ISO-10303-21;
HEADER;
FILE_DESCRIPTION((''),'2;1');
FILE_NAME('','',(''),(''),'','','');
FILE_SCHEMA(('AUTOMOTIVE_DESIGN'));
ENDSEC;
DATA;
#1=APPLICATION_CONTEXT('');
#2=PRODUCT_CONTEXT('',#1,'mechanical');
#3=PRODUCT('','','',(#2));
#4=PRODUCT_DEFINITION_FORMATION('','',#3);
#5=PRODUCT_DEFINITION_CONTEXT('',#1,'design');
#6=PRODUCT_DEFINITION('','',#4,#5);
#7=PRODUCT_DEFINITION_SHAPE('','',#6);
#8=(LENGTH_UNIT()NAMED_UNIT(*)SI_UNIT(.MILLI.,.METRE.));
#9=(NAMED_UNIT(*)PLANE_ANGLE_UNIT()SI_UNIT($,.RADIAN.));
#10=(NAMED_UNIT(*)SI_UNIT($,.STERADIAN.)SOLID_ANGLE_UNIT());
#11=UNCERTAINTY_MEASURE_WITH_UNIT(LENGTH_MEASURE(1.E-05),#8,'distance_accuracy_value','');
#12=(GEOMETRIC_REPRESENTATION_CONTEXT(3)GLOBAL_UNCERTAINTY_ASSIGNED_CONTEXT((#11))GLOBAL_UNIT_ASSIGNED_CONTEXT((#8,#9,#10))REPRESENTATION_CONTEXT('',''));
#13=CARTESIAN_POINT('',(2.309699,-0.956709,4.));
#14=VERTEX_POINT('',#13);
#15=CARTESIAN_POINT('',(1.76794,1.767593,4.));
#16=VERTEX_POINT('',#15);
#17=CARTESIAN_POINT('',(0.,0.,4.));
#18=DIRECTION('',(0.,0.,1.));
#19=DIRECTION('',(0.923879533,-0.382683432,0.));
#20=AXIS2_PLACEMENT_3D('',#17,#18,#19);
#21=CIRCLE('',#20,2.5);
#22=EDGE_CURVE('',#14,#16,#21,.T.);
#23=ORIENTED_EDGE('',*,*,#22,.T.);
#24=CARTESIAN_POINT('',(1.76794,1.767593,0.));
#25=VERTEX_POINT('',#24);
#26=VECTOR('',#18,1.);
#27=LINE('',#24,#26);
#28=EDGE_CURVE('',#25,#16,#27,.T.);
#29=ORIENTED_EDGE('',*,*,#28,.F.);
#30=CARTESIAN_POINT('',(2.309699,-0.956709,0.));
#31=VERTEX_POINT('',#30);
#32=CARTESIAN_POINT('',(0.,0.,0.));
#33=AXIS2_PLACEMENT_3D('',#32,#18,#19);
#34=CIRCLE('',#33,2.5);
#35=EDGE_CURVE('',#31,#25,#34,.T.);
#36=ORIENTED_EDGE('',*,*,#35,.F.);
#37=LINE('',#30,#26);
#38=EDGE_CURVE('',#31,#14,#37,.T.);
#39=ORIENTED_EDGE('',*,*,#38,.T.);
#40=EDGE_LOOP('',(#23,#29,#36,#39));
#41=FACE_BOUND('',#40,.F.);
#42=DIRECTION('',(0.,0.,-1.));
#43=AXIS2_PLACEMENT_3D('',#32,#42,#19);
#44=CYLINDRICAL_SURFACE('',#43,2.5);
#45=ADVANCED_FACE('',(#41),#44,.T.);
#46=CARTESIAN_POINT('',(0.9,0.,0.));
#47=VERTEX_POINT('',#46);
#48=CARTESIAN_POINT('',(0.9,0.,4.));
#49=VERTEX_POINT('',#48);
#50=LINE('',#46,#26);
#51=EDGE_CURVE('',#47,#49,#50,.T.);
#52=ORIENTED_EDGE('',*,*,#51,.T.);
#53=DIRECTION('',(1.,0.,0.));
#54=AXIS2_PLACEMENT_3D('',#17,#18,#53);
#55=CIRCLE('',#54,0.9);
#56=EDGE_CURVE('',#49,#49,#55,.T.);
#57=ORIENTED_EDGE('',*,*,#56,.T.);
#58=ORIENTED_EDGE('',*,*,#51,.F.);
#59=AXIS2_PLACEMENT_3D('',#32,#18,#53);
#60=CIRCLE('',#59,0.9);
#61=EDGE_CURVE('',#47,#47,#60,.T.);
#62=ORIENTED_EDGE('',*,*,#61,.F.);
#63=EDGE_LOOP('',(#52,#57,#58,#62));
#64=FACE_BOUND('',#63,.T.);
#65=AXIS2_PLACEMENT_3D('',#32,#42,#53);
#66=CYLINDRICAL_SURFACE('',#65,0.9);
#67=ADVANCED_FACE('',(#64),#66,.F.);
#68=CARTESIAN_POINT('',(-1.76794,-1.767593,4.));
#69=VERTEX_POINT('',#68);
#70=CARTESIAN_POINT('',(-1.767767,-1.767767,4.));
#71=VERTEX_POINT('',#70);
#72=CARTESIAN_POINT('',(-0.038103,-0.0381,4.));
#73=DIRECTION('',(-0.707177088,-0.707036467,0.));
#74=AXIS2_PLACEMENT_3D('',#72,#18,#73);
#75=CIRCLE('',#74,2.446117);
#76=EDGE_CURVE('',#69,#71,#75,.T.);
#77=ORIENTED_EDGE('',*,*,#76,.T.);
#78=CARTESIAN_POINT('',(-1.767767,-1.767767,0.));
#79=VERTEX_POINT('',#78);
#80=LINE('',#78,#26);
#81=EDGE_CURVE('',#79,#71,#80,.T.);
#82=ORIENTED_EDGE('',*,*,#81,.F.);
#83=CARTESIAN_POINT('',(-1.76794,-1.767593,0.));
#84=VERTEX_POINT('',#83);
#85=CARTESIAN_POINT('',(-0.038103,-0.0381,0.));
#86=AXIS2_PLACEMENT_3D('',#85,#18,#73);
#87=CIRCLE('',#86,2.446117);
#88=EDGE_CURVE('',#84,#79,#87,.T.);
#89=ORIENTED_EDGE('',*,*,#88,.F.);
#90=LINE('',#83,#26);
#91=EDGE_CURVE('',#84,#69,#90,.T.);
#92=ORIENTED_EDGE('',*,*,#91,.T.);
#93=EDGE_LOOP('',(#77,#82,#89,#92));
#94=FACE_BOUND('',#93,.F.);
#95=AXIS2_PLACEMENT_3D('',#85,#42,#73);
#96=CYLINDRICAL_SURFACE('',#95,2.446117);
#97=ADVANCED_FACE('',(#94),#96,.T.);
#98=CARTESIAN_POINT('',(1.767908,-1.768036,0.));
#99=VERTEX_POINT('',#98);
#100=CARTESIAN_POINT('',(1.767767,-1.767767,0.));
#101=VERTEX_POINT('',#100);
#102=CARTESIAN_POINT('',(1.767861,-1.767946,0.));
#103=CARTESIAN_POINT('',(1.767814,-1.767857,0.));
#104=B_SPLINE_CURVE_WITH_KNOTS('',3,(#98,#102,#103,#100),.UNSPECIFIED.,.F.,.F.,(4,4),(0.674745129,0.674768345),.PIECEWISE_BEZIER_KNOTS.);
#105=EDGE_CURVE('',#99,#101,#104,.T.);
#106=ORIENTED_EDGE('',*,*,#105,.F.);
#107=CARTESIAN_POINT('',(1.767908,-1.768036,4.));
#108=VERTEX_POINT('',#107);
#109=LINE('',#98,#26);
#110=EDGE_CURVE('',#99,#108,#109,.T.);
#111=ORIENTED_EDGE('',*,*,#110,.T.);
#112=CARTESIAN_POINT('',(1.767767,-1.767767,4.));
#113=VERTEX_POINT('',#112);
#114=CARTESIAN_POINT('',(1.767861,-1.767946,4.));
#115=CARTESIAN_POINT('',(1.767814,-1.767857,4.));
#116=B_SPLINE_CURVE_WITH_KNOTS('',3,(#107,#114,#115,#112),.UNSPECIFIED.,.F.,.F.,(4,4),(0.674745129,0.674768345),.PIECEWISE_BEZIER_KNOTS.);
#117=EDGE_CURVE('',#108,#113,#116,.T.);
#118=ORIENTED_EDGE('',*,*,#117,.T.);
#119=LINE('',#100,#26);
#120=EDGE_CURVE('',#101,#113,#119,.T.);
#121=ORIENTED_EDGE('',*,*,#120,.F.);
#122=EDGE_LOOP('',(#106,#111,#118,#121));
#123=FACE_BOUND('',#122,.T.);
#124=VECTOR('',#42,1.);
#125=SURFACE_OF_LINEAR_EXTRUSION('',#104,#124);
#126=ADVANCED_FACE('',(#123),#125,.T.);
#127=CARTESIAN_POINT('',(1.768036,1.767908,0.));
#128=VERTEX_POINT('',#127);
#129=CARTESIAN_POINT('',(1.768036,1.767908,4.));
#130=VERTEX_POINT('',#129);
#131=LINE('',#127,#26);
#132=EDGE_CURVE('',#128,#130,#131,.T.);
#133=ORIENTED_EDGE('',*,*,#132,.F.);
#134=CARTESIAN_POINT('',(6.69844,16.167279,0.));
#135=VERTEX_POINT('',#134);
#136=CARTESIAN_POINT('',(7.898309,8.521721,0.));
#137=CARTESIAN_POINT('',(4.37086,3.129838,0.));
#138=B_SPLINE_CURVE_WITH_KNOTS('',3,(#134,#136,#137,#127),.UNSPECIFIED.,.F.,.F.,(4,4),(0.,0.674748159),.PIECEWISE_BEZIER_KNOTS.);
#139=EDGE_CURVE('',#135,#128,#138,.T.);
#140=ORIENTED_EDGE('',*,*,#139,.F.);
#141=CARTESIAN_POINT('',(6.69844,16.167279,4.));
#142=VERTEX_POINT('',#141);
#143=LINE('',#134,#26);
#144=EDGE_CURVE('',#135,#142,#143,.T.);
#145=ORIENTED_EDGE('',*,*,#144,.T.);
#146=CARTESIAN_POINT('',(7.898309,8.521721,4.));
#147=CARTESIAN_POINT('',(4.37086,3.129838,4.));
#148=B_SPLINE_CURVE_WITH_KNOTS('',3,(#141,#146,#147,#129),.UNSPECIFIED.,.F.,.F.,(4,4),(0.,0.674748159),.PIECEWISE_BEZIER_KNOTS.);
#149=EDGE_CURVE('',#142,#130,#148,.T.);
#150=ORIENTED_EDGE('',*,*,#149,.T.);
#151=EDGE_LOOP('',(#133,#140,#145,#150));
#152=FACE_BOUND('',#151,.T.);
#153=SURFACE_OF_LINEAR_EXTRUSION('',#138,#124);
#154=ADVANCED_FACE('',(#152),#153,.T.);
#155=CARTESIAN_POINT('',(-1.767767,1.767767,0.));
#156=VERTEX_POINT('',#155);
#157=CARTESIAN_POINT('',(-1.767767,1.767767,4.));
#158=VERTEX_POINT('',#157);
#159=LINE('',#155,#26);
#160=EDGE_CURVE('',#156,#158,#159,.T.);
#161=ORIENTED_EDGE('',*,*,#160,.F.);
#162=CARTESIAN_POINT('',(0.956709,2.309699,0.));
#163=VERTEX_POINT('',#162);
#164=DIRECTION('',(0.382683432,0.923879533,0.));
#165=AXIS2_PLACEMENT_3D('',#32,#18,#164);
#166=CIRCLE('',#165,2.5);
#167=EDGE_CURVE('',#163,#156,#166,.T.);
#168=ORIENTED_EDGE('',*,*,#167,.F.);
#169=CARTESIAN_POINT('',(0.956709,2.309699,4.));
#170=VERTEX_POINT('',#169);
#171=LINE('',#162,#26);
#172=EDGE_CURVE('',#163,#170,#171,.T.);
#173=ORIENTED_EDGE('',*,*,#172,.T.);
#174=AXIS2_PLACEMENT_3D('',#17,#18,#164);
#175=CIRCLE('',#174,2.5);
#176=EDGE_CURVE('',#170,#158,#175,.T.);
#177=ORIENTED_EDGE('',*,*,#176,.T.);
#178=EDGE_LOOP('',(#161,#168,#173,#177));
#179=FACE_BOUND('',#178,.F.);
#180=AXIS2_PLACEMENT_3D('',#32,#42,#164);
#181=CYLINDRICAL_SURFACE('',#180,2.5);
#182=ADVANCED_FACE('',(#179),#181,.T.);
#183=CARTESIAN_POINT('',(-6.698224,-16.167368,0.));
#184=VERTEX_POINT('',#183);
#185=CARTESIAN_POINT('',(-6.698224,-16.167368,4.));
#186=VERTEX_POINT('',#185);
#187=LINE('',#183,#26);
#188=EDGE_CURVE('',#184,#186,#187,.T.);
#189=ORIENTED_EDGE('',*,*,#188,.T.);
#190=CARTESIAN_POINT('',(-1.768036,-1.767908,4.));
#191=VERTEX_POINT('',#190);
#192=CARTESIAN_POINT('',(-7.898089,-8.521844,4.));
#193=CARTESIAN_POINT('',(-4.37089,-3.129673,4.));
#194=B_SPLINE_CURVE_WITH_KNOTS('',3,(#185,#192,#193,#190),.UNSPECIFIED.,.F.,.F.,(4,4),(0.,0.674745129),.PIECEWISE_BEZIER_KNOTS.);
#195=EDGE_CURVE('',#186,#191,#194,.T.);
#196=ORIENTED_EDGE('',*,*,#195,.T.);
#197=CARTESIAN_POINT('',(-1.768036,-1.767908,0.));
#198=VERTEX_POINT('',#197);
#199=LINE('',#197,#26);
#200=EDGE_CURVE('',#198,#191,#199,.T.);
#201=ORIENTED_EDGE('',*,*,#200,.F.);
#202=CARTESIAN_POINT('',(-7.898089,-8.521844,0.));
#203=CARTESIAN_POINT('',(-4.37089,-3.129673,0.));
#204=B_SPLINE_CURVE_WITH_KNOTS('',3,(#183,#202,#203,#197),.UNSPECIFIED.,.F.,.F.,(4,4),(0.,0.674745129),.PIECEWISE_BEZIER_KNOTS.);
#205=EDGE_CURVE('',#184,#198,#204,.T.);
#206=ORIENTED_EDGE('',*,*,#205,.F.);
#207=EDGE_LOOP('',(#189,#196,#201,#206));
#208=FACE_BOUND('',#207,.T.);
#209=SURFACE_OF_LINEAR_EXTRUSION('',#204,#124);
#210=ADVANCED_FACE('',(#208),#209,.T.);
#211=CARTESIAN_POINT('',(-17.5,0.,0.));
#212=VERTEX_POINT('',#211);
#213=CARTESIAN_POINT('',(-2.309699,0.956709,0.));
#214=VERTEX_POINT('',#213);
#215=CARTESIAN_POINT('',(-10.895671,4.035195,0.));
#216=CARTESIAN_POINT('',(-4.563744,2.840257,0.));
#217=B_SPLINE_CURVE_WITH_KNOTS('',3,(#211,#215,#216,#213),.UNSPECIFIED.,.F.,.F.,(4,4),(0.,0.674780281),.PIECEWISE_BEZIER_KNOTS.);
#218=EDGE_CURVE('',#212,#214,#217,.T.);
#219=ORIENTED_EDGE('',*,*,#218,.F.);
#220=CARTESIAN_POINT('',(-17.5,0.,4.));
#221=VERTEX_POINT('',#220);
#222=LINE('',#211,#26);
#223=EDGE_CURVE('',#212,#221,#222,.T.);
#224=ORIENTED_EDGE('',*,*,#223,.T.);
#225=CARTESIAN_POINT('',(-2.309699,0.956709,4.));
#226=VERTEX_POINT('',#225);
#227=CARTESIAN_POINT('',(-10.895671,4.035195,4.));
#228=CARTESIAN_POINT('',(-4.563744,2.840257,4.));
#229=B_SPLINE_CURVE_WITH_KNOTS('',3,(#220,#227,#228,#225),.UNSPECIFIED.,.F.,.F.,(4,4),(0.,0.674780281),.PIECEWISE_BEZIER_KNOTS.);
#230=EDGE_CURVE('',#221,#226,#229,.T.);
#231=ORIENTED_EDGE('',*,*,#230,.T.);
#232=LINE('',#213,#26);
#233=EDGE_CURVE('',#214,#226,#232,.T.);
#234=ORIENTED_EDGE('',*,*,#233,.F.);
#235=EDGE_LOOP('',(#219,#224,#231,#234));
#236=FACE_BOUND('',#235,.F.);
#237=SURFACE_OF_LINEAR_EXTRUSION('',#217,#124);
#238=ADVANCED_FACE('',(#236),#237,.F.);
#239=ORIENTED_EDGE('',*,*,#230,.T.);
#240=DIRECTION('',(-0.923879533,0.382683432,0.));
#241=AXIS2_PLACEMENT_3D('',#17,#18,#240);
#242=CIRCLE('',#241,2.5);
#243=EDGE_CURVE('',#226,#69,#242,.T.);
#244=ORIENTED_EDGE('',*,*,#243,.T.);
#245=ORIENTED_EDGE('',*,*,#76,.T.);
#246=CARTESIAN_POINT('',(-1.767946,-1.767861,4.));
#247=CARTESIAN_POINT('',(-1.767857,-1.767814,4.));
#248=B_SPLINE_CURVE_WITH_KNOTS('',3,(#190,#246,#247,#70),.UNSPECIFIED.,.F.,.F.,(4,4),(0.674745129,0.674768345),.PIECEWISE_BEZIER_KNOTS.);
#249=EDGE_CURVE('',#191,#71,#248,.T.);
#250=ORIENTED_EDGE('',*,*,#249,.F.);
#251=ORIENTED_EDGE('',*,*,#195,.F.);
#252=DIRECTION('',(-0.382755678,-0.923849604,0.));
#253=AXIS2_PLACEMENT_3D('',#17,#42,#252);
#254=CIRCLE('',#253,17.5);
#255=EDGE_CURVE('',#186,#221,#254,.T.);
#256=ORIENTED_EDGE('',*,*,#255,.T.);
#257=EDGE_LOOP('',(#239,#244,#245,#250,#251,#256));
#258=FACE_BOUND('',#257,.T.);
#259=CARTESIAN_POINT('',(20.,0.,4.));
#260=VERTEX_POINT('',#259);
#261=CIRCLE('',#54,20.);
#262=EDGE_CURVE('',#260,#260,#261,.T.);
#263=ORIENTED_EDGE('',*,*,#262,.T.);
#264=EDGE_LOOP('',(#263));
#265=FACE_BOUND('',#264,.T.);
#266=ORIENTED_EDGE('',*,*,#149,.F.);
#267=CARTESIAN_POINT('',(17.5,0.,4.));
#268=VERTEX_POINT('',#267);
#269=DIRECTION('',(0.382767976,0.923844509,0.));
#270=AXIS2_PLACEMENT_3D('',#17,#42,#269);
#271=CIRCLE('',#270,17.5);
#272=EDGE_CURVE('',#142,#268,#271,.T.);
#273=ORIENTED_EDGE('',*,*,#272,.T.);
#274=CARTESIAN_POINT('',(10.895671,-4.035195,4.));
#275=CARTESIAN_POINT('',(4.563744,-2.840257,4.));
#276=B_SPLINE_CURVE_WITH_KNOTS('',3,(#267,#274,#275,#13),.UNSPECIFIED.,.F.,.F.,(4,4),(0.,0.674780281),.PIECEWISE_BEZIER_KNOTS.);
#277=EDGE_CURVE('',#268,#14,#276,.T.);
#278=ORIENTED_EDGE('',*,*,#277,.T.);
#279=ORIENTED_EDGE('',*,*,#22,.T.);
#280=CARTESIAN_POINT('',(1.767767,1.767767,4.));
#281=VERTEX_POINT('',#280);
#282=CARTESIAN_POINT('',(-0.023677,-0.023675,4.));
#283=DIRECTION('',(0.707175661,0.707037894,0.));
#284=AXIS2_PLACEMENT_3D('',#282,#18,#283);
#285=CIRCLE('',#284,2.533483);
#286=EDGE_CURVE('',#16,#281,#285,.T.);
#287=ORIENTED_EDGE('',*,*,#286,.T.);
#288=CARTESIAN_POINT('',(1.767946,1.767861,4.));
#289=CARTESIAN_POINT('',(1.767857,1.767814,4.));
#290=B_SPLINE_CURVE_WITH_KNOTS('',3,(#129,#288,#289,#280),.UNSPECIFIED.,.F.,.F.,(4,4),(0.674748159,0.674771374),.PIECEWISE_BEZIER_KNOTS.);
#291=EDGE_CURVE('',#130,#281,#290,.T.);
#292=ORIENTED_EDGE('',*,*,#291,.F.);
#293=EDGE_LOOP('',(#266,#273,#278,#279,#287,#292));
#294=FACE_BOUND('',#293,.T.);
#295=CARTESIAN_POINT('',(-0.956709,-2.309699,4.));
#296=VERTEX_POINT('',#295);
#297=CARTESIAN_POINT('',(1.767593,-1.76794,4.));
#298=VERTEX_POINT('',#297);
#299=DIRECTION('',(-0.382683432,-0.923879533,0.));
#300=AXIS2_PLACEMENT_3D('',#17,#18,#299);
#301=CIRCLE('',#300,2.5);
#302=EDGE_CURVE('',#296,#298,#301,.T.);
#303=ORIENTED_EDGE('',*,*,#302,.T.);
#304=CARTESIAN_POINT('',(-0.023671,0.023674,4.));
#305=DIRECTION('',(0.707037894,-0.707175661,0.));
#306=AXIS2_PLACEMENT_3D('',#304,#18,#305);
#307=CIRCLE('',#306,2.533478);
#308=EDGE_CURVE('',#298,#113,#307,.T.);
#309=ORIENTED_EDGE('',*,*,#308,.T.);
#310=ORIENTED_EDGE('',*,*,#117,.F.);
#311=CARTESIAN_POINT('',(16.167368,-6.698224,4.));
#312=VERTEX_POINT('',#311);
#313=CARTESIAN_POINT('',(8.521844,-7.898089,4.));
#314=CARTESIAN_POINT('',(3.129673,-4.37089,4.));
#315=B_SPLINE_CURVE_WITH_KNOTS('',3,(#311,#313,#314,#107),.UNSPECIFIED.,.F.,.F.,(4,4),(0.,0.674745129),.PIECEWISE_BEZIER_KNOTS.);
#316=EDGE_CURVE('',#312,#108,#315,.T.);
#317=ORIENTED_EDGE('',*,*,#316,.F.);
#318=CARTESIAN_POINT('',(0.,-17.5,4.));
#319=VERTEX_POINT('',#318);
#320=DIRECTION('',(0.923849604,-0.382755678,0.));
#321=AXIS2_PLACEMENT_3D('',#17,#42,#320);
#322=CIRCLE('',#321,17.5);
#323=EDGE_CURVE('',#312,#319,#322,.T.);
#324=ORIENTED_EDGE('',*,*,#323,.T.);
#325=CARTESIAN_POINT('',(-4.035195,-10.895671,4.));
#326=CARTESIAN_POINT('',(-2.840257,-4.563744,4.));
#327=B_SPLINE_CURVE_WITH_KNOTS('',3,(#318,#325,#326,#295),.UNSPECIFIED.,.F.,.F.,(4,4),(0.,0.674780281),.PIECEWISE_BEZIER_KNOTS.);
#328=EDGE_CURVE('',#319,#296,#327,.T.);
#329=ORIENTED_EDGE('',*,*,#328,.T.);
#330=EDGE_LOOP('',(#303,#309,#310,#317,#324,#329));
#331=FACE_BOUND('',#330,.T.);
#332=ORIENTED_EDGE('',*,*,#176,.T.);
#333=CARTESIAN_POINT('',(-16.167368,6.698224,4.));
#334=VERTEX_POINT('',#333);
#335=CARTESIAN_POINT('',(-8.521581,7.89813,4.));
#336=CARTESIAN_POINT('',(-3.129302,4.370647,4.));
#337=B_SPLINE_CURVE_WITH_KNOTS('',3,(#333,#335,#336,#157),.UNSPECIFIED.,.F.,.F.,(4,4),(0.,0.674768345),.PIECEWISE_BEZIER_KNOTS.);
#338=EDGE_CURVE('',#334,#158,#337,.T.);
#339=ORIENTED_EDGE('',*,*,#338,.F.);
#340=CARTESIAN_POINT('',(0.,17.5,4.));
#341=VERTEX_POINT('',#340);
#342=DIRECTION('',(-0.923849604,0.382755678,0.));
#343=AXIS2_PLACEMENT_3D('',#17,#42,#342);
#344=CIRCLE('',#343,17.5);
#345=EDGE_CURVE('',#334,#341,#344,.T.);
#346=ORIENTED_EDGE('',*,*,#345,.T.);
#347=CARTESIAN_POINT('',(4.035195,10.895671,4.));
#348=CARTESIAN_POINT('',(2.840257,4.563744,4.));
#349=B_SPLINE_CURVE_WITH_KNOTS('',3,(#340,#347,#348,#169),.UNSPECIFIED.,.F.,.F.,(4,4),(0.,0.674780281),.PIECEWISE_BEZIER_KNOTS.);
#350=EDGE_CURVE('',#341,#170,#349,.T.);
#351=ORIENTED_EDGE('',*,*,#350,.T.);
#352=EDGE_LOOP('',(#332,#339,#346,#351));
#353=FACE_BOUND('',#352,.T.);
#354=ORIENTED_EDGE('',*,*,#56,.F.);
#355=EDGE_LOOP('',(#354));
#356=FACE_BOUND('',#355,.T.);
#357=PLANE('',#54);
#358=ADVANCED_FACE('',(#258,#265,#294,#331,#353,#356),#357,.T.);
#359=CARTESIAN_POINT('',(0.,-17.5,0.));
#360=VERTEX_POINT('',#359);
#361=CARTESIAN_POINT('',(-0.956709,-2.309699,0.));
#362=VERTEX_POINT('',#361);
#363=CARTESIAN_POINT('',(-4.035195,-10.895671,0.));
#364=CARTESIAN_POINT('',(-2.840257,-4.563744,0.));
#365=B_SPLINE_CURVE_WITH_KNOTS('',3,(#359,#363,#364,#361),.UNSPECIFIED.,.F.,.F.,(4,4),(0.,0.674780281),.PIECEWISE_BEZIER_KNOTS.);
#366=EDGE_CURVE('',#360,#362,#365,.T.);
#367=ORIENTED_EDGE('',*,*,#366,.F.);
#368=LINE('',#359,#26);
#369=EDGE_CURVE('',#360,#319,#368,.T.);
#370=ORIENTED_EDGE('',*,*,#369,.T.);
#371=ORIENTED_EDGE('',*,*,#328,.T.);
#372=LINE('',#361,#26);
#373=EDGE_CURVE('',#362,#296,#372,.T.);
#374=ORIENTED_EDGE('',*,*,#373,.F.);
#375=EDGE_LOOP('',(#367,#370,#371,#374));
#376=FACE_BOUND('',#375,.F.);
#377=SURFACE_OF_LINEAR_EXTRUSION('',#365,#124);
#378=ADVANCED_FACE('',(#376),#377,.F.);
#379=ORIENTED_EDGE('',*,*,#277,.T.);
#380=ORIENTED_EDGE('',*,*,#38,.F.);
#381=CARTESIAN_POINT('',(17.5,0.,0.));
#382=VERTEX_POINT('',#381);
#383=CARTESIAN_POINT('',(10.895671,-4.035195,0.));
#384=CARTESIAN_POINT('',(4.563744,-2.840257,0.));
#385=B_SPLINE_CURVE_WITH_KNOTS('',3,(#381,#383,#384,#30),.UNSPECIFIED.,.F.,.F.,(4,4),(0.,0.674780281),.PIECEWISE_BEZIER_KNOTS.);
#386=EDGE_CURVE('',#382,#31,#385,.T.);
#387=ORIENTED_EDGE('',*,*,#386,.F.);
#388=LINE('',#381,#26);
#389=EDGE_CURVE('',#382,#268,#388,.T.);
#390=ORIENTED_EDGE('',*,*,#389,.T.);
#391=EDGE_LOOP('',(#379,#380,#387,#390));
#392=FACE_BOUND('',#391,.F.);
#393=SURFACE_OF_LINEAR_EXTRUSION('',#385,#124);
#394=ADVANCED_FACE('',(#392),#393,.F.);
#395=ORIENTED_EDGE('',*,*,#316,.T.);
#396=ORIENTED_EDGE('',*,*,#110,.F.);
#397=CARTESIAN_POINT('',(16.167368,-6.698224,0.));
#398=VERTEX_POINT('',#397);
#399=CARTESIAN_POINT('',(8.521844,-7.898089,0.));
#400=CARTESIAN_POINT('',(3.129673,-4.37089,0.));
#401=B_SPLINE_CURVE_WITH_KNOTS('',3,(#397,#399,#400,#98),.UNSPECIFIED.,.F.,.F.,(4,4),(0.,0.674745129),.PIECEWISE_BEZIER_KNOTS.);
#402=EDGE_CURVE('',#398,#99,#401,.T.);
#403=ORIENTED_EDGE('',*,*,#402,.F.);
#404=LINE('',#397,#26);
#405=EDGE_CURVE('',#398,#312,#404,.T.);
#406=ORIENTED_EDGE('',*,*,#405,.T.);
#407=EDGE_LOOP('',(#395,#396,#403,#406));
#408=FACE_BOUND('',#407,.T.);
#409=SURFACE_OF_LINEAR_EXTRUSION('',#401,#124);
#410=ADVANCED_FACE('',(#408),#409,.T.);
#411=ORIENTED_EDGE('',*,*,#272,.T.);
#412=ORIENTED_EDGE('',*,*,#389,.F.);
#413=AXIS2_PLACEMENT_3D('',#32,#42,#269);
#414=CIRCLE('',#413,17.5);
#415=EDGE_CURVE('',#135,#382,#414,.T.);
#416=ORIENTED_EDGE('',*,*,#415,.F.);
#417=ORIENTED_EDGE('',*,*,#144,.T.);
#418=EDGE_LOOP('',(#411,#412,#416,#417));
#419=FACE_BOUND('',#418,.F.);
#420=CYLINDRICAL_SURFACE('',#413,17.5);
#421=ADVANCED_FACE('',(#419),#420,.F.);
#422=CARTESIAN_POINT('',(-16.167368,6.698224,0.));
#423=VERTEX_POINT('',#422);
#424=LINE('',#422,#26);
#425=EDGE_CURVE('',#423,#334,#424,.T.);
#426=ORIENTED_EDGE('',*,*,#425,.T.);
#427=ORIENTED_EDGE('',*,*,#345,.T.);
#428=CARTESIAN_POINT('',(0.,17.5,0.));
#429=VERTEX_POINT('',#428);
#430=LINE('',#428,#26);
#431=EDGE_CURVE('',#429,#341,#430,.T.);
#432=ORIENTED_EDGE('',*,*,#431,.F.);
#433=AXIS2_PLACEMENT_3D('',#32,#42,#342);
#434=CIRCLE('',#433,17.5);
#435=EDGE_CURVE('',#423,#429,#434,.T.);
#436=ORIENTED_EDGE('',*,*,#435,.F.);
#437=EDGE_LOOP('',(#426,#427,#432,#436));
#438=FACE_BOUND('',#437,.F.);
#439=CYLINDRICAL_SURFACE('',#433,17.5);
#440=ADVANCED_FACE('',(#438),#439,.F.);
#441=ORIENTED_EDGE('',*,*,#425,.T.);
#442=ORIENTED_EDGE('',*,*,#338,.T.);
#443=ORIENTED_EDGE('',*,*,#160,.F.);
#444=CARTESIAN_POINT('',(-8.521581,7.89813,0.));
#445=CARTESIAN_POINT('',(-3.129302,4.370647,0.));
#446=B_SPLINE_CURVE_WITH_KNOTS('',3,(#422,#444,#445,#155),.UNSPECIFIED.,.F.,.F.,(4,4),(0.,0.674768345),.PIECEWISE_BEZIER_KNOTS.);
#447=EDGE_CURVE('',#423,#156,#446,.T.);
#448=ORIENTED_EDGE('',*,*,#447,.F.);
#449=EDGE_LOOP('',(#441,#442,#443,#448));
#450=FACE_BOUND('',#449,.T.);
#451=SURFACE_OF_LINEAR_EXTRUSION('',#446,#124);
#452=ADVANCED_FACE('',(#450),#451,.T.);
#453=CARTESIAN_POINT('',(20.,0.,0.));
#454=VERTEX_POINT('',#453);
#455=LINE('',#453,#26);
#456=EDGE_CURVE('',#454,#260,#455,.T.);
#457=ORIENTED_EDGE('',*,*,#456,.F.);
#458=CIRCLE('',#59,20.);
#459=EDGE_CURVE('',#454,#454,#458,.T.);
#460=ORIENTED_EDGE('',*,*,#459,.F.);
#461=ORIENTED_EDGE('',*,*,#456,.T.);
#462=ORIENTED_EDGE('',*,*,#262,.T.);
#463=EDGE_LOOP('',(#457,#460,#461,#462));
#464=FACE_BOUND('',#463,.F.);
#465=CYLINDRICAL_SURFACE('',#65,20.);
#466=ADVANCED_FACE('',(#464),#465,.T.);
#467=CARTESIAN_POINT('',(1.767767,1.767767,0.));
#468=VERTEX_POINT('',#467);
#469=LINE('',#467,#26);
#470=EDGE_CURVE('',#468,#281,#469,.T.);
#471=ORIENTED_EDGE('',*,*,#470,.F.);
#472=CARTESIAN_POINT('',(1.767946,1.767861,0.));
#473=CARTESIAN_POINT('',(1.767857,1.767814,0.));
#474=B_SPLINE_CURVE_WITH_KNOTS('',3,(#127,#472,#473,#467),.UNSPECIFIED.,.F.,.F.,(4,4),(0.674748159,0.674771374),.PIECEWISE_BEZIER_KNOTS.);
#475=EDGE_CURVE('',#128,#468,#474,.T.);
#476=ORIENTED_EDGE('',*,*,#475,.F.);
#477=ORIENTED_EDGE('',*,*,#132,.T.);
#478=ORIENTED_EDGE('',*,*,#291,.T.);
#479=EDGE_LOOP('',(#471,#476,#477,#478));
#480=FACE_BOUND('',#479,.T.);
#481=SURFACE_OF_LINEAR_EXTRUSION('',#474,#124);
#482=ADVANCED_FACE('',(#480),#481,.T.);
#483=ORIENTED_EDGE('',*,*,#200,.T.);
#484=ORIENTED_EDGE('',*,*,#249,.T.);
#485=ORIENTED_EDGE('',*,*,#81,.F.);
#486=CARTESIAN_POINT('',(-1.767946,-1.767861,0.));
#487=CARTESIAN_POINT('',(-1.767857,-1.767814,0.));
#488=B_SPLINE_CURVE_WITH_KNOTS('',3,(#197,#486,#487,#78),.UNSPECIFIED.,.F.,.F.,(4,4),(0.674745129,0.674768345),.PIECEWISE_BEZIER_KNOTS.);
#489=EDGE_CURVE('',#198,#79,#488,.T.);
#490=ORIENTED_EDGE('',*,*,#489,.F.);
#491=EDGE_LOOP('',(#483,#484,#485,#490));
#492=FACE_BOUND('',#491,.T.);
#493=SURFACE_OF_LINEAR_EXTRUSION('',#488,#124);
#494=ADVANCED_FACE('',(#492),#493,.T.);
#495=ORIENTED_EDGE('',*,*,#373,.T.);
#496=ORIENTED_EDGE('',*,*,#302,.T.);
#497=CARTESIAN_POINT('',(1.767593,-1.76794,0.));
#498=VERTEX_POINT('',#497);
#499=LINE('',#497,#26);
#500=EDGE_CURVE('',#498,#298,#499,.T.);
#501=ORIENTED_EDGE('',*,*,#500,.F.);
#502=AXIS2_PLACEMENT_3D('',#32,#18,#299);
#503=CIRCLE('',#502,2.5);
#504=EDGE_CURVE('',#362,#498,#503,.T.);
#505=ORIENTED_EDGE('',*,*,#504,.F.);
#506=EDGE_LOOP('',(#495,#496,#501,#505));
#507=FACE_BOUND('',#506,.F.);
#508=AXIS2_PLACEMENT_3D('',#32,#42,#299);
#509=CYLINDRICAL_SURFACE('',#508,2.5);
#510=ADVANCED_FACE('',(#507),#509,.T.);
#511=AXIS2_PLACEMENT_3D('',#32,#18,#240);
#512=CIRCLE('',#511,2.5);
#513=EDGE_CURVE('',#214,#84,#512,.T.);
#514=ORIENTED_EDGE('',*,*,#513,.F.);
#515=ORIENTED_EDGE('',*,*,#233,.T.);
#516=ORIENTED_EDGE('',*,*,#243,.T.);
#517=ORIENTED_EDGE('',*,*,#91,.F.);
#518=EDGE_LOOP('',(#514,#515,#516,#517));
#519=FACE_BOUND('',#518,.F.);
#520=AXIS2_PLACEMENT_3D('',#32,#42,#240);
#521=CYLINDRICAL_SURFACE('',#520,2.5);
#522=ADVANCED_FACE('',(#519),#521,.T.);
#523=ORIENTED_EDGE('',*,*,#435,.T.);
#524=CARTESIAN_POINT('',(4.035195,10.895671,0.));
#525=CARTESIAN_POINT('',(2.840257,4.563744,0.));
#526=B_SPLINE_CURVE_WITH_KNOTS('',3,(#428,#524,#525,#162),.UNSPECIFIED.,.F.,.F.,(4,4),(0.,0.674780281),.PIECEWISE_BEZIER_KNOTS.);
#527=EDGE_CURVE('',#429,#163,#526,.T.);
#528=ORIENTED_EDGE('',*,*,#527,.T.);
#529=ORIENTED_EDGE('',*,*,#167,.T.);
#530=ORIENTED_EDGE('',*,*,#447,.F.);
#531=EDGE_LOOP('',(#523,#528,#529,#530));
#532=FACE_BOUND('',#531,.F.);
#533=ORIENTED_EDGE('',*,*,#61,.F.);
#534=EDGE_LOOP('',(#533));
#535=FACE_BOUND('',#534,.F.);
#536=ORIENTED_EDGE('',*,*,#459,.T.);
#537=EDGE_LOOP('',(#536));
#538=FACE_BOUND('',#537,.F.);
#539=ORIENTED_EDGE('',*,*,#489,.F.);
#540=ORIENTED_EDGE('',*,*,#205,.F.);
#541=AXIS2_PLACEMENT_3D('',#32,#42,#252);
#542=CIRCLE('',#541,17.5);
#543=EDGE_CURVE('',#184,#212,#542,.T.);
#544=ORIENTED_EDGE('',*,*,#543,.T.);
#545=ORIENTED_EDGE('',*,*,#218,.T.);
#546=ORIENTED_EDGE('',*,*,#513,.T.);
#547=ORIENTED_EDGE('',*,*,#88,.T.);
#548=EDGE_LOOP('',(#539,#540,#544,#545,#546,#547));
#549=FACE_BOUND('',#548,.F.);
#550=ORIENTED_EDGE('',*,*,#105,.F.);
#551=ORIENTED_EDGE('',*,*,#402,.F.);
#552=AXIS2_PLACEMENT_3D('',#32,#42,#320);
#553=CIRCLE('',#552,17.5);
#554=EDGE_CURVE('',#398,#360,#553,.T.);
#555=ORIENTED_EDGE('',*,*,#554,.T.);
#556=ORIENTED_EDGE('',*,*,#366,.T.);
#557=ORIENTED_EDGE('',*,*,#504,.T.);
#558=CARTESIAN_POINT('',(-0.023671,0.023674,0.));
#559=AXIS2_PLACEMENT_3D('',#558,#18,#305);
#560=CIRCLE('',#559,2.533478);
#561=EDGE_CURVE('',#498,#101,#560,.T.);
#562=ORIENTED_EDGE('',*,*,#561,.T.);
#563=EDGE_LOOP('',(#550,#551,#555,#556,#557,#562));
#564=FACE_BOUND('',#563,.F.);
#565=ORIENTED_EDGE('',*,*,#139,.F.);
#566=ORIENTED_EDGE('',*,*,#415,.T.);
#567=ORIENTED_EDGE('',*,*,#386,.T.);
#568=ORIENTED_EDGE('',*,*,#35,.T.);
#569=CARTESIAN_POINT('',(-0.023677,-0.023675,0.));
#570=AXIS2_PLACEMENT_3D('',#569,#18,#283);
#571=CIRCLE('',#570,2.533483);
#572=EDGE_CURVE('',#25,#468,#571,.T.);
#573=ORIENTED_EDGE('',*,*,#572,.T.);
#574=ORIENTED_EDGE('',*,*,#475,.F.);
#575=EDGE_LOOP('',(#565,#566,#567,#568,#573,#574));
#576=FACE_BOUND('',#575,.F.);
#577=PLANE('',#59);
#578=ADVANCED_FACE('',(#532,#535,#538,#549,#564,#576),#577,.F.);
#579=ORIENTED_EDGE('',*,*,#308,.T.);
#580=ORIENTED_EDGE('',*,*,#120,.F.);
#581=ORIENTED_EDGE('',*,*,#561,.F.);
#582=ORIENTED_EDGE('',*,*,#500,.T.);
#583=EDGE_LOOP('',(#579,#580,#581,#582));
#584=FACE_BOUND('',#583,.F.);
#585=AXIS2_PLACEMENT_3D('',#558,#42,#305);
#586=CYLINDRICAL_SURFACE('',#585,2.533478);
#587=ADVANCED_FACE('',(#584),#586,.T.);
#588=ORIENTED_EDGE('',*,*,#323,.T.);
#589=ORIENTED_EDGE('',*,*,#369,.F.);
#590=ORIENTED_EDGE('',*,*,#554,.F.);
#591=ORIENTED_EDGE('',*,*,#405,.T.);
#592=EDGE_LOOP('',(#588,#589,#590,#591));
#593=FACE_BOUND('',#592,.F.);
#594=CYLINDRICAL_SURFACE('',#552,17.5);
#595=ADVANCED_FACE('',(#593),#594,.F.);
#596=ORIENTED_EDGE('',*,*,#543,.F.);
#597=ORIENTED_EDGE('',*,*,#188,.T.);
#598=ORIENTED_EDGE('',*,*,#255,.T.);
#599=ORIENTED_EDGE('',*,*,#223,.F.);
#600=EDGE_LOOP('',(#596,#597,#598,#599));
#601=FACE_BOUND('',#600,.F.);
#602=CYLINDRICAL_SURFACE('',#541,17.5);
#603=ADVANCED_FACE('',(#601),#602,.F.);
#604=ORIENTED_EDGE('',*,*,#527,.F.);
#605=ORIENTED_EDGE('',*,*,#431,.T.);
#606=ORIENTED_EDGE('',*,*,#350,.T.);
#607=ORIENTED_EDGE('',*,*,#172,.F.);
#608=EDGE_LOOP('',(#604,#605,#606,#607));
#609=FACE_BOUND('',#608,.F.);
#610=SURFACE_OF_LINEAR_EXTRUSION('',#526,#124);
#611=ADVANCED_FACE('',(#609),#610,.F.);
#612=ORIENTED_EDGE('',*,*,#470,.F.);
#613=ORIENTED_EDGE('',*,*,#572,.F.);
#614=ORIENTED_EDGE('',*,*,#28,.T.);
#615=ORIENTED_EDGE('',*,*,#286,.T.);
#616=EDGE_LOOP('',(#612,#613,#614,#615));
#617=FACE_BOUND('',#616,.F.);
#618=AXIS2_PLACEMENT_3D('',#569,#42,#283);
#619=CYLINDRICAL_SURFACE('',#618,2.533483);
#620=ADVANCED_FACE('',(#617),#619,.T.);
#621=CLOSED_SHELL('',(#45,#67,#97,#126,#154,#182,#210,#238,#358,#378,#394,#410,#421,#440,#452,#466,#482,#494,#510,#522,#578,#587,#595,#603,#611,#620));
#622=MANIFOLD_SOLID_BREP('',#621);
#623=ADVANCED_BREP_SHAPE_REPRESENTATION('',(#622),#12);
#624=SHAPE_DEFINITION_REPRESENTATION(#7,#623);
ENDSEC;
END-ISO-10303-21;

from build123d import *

# Parameters (mm, degrees)
F0_R     = 20
F0_R_2   = 0.9
F1_DEPTH = 4


with BuildPart() as f1:
    # F0 (on Top) → F1 (new body)
    with BuildSketch(Plane.XY):
        Circle(F0_R)
        with BuildLine():
            ThreePointArc((-16.1673680712, 6.6982243655), (-9.7219101416, 14.5510983502), (0, 17.5))
            add(Edge.make_bspline(
                [(0, 17.5), (4.0351947292, 10.8956713768), (2.8402573141, 4.5637440123), (0.9567085809, 2.3096988313)],
                knots=[0, 0, 0, 0, 0.6747802814, 0.6747802814, 0.6747802814, 0.6747802814], degree=3))
            add(Edge.make_bspline(
                [(1.05334234, 1.483872858), (1.0137768965, 1.7486550509), (0.9849575618, 2.0237015142), (0.9567085809, 2.3096988313)],
                knots=[0.9279449305, 0.9279449305, 0.9279449305, 0.9279449305, 1, 1, 1, 1], degree=3))
            add(Edge.make_bspline(
                [(1.7677669525, 1.7677669535), (1.7677118309, 1.7677381162), (1.5223929609, 1.6394048238), (1.2852910821, 1.5468737836), (1.0533423393, 1.4838728598)],
                knots=[0.6747713742, 0.6747713742, 0.6747713742, 0.6747713742, 0.6747856641, 0.7383691109, 0.7383691109, 0.7383691109, 0.7383691109], degree=3))
            add(Edge.make_bspline(
                [(1.76803561, 1.7679075162), (1.7679460564, 1.7678606572), (1.7678565039, 1.7678138029), (1.7677669525, 1.7677669535)],
                knots=[0.6747481586, 0.6747481586, 0.6747481586, 0.6747481586, 0.6747713742, 0.6747713742, 0.6747713742, 0.6747713742], degree=3))
            add(Edge.make_bspline(
                [(6.6984395879, 16.1672789018), (7.8983091219, 8.521720501), (4.3708601286, 3.1298383292), (1.76803561, 1.7679075162)],
                knots=[0, 0, 0, 0, 0.6747481586, 0.6747481586, 0.6747481586, 0.6747481586], degree=3))
            ThreePointArc((6.6984395879, 16.1672789018), (14.5511630598, 9.721813288), (17.5, 0))
            add(Edge.make_bspline(
                [(17.5, 0), (10.8956713768, -4.0351947292), (4.5637440123, -2.8402573141), (2.3096988313, -0.9567085809)],
                knots=[0, 0, 0, 0, 0.6747802814, 0.6747802814, 0.6747802814, 0.6747802814], degree=3))
            add(Edge.make_bspline(
                [(1.4839305002, -1.0533337269), (1.7486949687, -1.0137727139), (2.0237222677, -0.9849555119), (2.3096988313, -0.9567085809)],
                knots=[0.9279501592, 0.9279501592, 0.9279501592, 0.9279501592, 1, 1, 1, 1], degree=3))
            add(Edge.make_bspline(
                [(1.767766953, -1.767766953), (1.7677424454, -1.767720101), (1.639424724, -1.5224005371), (1.5469125425, -1.2852951635), (1.483930502, -1.0533337262)],
                knots=[0.6747683451, 0.6747683451, 0.6747683451, 0.6747683451, 0.674780491, 0.7383651842, 0.7383651842, 0.7383651842, 0.7383651842], degree=3))
            add(Edge.make_bspline(
                [(1.7679075011, -1.7680356179), (1.767860647, -1.7679460618), (1.7678137976, -1.7678565068), (1.767766953, -1.767766953)],
                knots=[0.6747451292, 0.6747451292, 0.6747451292, 0.6747451292, 0.6747683451, 0.6747683451, 0.6747683451, 0.6747683451], degree=3))
            add(Edge.make_bspline(
                [(16.1673680713, -6.6982243654), (8.5218439975, -7.8980885198), (3.1296734519, -4.3708895859), (1.7679075011, -1.7680356179)],
                knots=[0, 0, 0, 0, 0.6747451292, 0.6747451292, 0.6747451292, 0.6747451292], degree=3))
            ThreePointArc((16.1673680713, -6.6982243654), (9.7219101417, -14.5510983502), (0, -17.5))
            add(Edge.make_bspline(
                [(0, -17.5), (-4.0351947292, -10.8956713768), (-2.8402573141, -4.5637440123), (-0.9567085809, -2.3096988313)],
                knots=[0, 0, 0, 0, 0.6747802814, 0.6747802814, 0.6747802814, 0.6747802814], degree=3))
            add(Edge.make_bspline(
                [(-1.0533337269, -1.4839305003), (-1.0137727139, -1.7486949687), (-0.9849555119, -2.0237222677), (-0.9567085809, -2.3096988313)],
                knots=[0.9279501592, 0.9279501592, 0.9279501592, 0.9279501592, 1, 1, 1, 1], degree=3))
            add(Edge.make_bspline(
                [(-1.767766953, -1.767766953), (-1.7677201011, -1.7677424454), (-1.5224005372, -1.639424724), (-1.2852951635, -1.5469125425), (-1.0533337262, -1.483930502)],
                knots=[0.6747683451, 0.6747683451, 0.6747683451, 0.6747683451, 0.674780491, 0.7383651842, 0.7383651842, 0.7383651842, 0.7383651842], degree=3))
            add(Edge.make_bspline(
                [(-1.7680356179, -1.7679075011), (-1.7679460618, -1.767860647), (-1.7678565068, -1.7678137976), (-1.767766953, -1.767766953)],
                knots=[0.6747451293, 0.6747451293, 0.6747451293, 0.6747451293, 0.6747683451, 0.6747683451, 0.6747683451, 0.6747683451], degree=3))
            add(Edge.make_bspline(
                [(-6.6982243654, -16.1673680712), (-7.8980885199, -8.5218439973), (-4.3708895859, -3.1296734518), (-1.7680356179, -1.7679075011)],
                knots=[0, 0, 0, 0, 0.6747451293, 0.6747451293, 0.6747451293, 0.6747451293], degree=3))
            ThreePointArc((-6.6982243654, -16.1673680712), (-14.5510983502, -9.7219101417), (-17.5, 0))
            add(Edge.make_bspline(
                [(-17.5, 0), (-10.8956713768, 4.0351947292), (-4.5637440123, 2.8402573141), (-2.3096988313, 0.9567085809)],
                knots=[0, 0, 0, 0, 0.6747802814, 0.6747802814, 0.6747802814, 0.6747802814], degree=3))
            add(Edge.make_bspline(
                [(-1.4839305003, 1.0533337269), (-1.7486949687, 1.0137727139), (-2.0237222677, 0.9849555119), (-2.3096988313, 0.9567085809)],
                knots=[0.9279501592, 0.9279501592, 0.9279501592, 0.9279501592, 1, 1, 1, 1], degree=3))
            add(Edge.make_bspline(
                [(-1.767766953, 1.767766953), (-1.7677424454, 1.7677201011), (-1.6394247241, 1.5224005372), (-1.5469125425, 1.2852951636), (-1.4839305021, 1.0533337262)],
                knots=[0.6747683451, 0.6747683451, 0.6747683451, 0.6747683451, 0.674780491, 0.7383651842, 0.7383651842, 0.7383651842, 0.7383651842], degree=3))
            add(Edge.make_bspline(
                [(-16.1673680712, 6.6982243655), (-8.5215809386, 7.8981298036), (-3.1293023988, 4.3706468604), (-1.767766953, 1.767766953)],
                knots=[0, 0, 0, 0, 0.6747683451, 0.6747683451, 0.6747683451, 0.6747683451], degree=3))
        make_face(mode=Mode.SUBTRACT)
        with BuildLine():
            add(Edge.make_bspline(
                [(1.05334234, 1.483872858), (1.0137768965, 1.7486550509), (0.9849575618, 2.0237015142), (0.9567085809, 2.3096988313)],
                knots=[0.9279449305, 0.9279449305, 0.9279449305, 0.9279449305, 1, 1, 1, 1], degree=3))
            add(Edge.make_bspline(
                [(0.9567085809, 2.3096988313), (0.5925556194, 1.873916516), (0.202663868, 1.5905565475), (-0.2170414882, 1.3992266891)],
                knots=[0.6747802814, 0.6747802814, 0.6747802814, 0.6747802814, 0.8052378764, 0.8052378764, 0.8052378764, 0.8052378764], degree=3))
            add(Edge.make_bspline(
                [(1.0533423393, 1.4838728598), (0.6188058723, 1.3658459262), (0.2021683226, 1.3513874939), (-0.2170414882, 1.3992266891)],
                knots=[0.7383691109, 0.7383691109, 0.7383691109, 0.7383691109, 0.8574873522, 0.8574873522, 0.8574873522, 0.8574873522], degree=3))
        make_face()
        with BuildLine():
            add(Edge.make_bspline(
                [(0.9567085809, 2.3096988313), (0.5925556194, 1.873916516), (0.202663868, 1.5905565475), (-0.2170414882, 1.3992266891)],
                knots=[0.6747802814, 0.6747802814, 0.6747802814, 0.6747802814, 0.8052378764, 0.8052378764, 0.8052378764, 0.8052378764], degree=3))
            ThreePointArc((0.9567085809, 2.3096988313), (-0.4877258051, 2.451963201), (-1.767766953, 1.767766953))
            add(Edge.make_bspline(
                [(-0.2170414882, 1.3992266891), (-0.7185826414, 1.4564613351), (-1.2238056379, 1.6028665997), (-1.767766953, 1.767766953)],
                knots=[0.8574873522, 0.8574873522, 0.8574873522, 0.8574873522, 1, 1, 1, 1], degree=3))
        make_face()
        with BuildLine():
            add(Edge.make_bspline(
                [(-0.2170414882, 1.3992266891), (-0.7185826414, 1.4564613351), (-1.2238056379, 1.6028665997), (-1.767766953, 1.767766953)],
                knots=[0.8574873522, 0.8574873522, 0.8574873522, 0.8574873522, 1, 1, 1, 1], degree=3))
            add(Edge.make_bspline(
                [(-1.767766953, 1.767766953), (-1.7677424454, 1.7677201011), (-1.6394247241, 1.5224005372), (-1.5469125425, 1.2852951636), (-1.4839305021, 1.0533337262)],
                knots=[0.6747683451, 0.6747683451, 0.6747683451, 0.6747683451, 0.674780491, 0.7383651842, 0.7383651842, 0.7383651842, 0.7383651842], degree=3))
            add(Edge.make_bspline(
                [(-0.2170414882, 1.3992266891), (-0.6118287934, 1.21925615), (-1.0329947036, 1.1207123938), (-1.4839305003, 1.0533337269)],
                knots=[0.8052378764, 0.8052378764, 0.8052378764, 0.8052378764, 0.9279501592, 0.9279501592, 0.9279501592, 0.9279501592], degree=3))
        make_face()
        with BuildLine():
            add(Edge.make_bspline(
                [(1.0533423393, 1.4838728598), (0.6188058723, 1.3658459262), (0.2021683226, 1.3513874939), (-0.2170414882, 1.3992266891)],
                knots=[0.7383691109, 0.7383691109, 0.7383691109, 0.7383691109, 0.8574873522, 0.8574873522, 0.8574873522, 0.8574873522], degree=3))
            add(Edge.make_bspline(
                [(-0.2170414882, 1.3992266891), (-0.6118287934, 1.21925615), (-1.0329947036, 1.1207123938), (-1.4839305003, 1.0533337269)],
                knots=[0.8052378764, 0.8052378764, 0.8052378764, 0.8052378764, 0.9279501592, 0.9279501592, 0.9279501592, 0.9279501592], degree=3))
            add(Edge.make_bspline(
                [(-1.4839305021, 1.0533337262), (-1.3659750292, 0.6189063747), (-1.3515357612, 0.2023627588), (-1.3993629137, -0.2167427021)],
                knots=[0.7383651842, 0.7383651842, 0.7383651842, 0.7383651842, 0.8574493311, 0.8574493311, 0.8574493311, 0.8574493311], degree=3))
            add(Edge.make_bspline(
                [(-1.3993629137, -0.2167427021), (-1.2193058732, -0.6116162916), (-1.1207293921, -1.0328809414), (-1.0533337269, -1.4839305003)],
                knots=[0.8052069185, 0.8052069185, 0.8052069185, 0.8052069185, 0.9279501592, 0.9279501592, 0.9279501592, 0.9279501592], degree=3))
            add(Edge.make_bspline(
                [(-1.0533337262, -1.483930502), (-0.6189063746, -1.3659750292), (-0.2023627587, -1.3515357612), (0.2167427022, -1.3993629136)],
                knots=[0.7383651842, 0.7383651842, 0.7383651842, 0.7383651842, 0.8574493311, 0.8574493311, 0.8574493311, 0.8574493311], degree=3))
            add(Edge.make_bspline(
                [(0.2167427022, -1.3993629136), (0.6116162917, -1.2193058732), (1.0328809414, -1.1207293921), (1.4839305002, -1.0533337269)],
                knots=[0.8052069185, 0.8052069185, 0.8052069185, 0.8052069185, 0.9279501592, 0.9279501592, 0.9279501592, 0.9279501592], degree=3))
            add(Edge.make_bspline(
                [(1.483930502, -1.0533337262), (1.3659750291, -0.6189063746), (1.3515357611, -0.2023627586), (1.3993629136, 0.2167427023)],
                knots=[0.7383651842, 0.7383651842, 0.7383651842, 0.7383651842, 0.8574493311, 0.8574493311, 0.8574493311, 0.8574493311], degree=3))
            add(Edge.make_bspline(
                [(1.3993629136, 0.2167427023), (1.2193135434, 0.6115994707), (1.1207377907, 1.0328450508), (1.05334234, 1.483872858)],
                knots=[0.8052069185, 0.8052069185, 0.8052069185, 0.8052069185, 0.9279449305, 0.9279449305, 0.9279449305, 0.9279449305], degree=3))
        make_face()
        Circle(F0_R_2, mode=Mode.SUBTRACT)
        with BuildLine():
            add(Edge.make_bspline(
                [(1.7677669525, 1.7677669535), (1.7677118309, 1.7677381162), (1.5223929609, 1.6394048238), (1.2852910821, 1.5468737836), (1.0533423393, 1.4838728598)],
                knots=[0.6747713742, 0.6747713742, 0.6747713742, 0.6747713742, 0.6747856641, 0.7383691109, 0.7383691109, 0.7383691109, 0.7383691109], degree=3))
            add(Edge.make_bspline(
                [(1.3993629136, 0.2167427023), (1.2193135434, 0.6115994707), (1.1207377907, 1.0328450508), (1.05334234, 1.483872858)],
                knots=[0.8052069185, 0.8052069185, 0.8052069185, 0.8052069185, 0.9279449305, 0.9279449305, 0.9279449305, 0.9279449305], degree=3))
            add(Edge.make_bspline(
                [(1.3993629136, 0.2167427023), (1.45660379, 0.7183398629), (1.6030349201, 1.2236066033), (1.7679404268, 1.7675934622)],
                knots=[0.8574493311, 0.8574493311, 0.8574493311, 0.8574493311, 0.9999725754, 0.9999725754, 0.9999725754, 0.9999725754], degree=3))
            ThreePointArc((1.7679404268, 1.7675934622), (1.7678536918, 1.7676802099), (1.7677669525, 1.7677669535))
        make_face()
        with BuildLine():
            add(Edge.make_bspline(
                [(-1.4839305021, 1.0533337262), (-1.3659750292, 0.6189063747), (-1.3515357612, 0.2023627588), (-1.3993629137, -0.2167427021)],
                knots=[0.7383651842, 0.7383651842, 0.7383651842, 0.7383651842, 0.8574493311, 0.8574493311, 0.8574493311, 0.8574493311], degree=3))
            add(Edge.make_bspline(
                [(-1.4839305003, 1.0533337269), (-1.7486949687, 1.0137727139), (-2.0237222677, 0.9849555119), (-2.3096988313, 0.9567085809)],
                knots=[0.9279501592, 0.9279501592, 0.9279501592, 0.9279501592, 1, 1, 1, 1], degree=3))
            add(Edge.make_bspline(
                [(-2.3096988313, 0.9567085809), (-1.8740199281, 0.5926420338), (-1.59069104, 0.2028489109), (-1.3993629137, -0.2167427021)],
                knots=[0.6747802814, 0.6747802814, 0.6747802814, 0.6747802814, 0.8052069185, 0.8052069185, 0.8052069185, 0.8052069185], degree=3))
        make_face()
        with BuildLine():
            add(Edge.make_bspline(
                [(1.3993629136, 0.2167427023), (1.45660379, 0.7183398629), (1.6030349201, 1.2236066033), (1.7679404268, 1.7675934622)],
                knots=[0.8574493311, 0.8574493311, 0.8574493311, 0.8574493311, 0.9999725754, 0.9999725754, 0.9999725754, 0.9999725754], degree=3))
            add(Edge.make_bspline(
                [(2.3096988313, -0.9567085809), (1.874019928, -0.5926420337), (1.5906910399, -0.2028489108), (1.3993629136, 0.2167427023)],
                knots=[0.6747802814, 0.6747802814, 0.6747802814, 0.6747802814, 0.8052069185, 0.8052069185, 0.8052069185, 0.8052069185], degree=3))
            ThreePointArc((2.3096988313, -0.9567085809), (2.4519871299, 0.487605491), (1.7679404268, 1.7675934622))
        make_face()
        with BuildLine():
            add(Edge.make_bspline(
                [(2.3096988313, -0.9567085809), (1.874019928, -0.5926420337), (1.5906910399, -0.2028489108), (1.3993629136, 0.2167427023)],
                knots=[0.6747802814, 0.6747802814, 0.6747802814, 0.6747802814, 0.8052069185, 0.8052069185, 0.8052069185, 0.8052069185], degree=3))
            add(Edge.make_bspline(
                [(1.483930502, -1.0533337262), (1.3659750291, -0.6189063746), (1.3515357611, -0.2023627586), (1.3993629136, 0.2167427023)],
                knots=[0.7383651842, 0.7383651842, 0.7383651842, 0.7383651842, 0.8574493311, 0.8574493311, 0.8574493311, 0.8574493311], degree=3))
            add(Edge.make_bspline(
                [(1.4839305002, -1.0533337269), (1.7486949687, -1.0137727139), (2.0237222677, -0.9849555119), (2.3096988313, -0.9567085809)],
                knots=[0.9279501592, 0.9279501592, 0.9279501592, 0.9279501592, 1, 1, 1, 1], degree=3))
        make_face()
        with BuildLine():
            add(Edge.make_bspline(
                [(-2.3096988313, 0.9567085809), (-1.8740199281, 0.5926420338), (-1.59069104, 0.2028489109), (-1.3993629137, -0.2167427021)],
                knots=[0.6747802814, 0.6747802814, 0.6747802814, 0.6747802814, 0.8052069185, 0.8052069185, 0.8052069185, 0.8052069185], degree=3))
            ThreePointArc((-2.3096988313, 0.9567085809), (-2.4519871299, -0.4876054909), (-1.7679404269, -1.767593462))
            add(Edge.make_bspline(
                [(-1.3993629137, -0.2167427021), (-1.4566037901, -0.7183398627), (-1.6030349202, -1.2236066032), (-1.7679404269, -1.767593462)],
                knots=[0.8574493311, 0.8574493311, 0.8574493311, 0.8574493311, 0.9999725754, 0.9999725754, 0.9999725754, 0.9999725754], degree=3))
        make_face()
        with BuildLine():
            add(Edge.make_bspline(
                [(-1.3993629137, -0.2167427021), (-1.2193058732, -0.6116162916), (-1.1207293921, -1.0328809414), (-1.0533337269, -1.4839305003)],
                knots=[0.8052069185, 0.8052069185, 0.8052069185, 0.8052069185, 0.9279501592, 0.9279501592, 0.9279501592, 0.9279501592], degree=3))
            add(Edge.make_bspline(
                [(-1.3993629137, -0.2167427021), (-1.4566037901, -0.7183398627), (-1.6030349202, -1.2236066032), (-1.7679404269, -1.767593462)],
                knots=[0.8574493311, 0.8574493311, 0.8574493311, 0.8574493311, 0.9999725754, 0.9999725754, 0.9999725754, 0.9999725754], degree=3))
            ThreePointArc((-1.7679404269, -1.767593462), (-1.7678536921, -1.7676802097), (-1.767766953, -1.767766953))
            add(Edge.make_bspline(
                [(-1.767766953, -1.767766953), (-1.7677201011, -1.7677424454), (-1.5224005372, -1.639424724), (-1.2852951635, -1.5469125425), (-1.0533337262, -1.483930502)],
                knots=[0.6747683451, 0.6747683451, 0.6747683451, 0.6747683451, 0.674780491, 0.7383651842, 0.7383651842, 0.7383651842, 0.7383651842], degree=3))
        make_face()
        with BuildLine():
            add(Edge.make_bspline(
                [(1.767766953, -1.767766953), (1.7677424454, -1.767720101), (1.639424724, -1.5224005371), (1.5469125425, -1.2852951635), (1.483930502, -1.0533337262)],
                knots=[0.6747683451, 0.6747683451, 0.6747683451, 0.6747683451, 0.674780491, 0.7383651842, 0.7383651842, 0.7383651842, 0.7383651842], degree=3))
            add(Edge.make_bspline(
                [(0.2167427022, -1.3993629136), (0.6116162917, -1.2193058732), (1.0328809414, -1.1207293921), (1.4839305002, -1.0533337269)],
                knots=[0.8052069185, 0.8052069185, 0.8052069185, 0.8052069185, 0.9279501592, 0.9279501592, 0.9279501592, 0.9279501592], degree=3))
            add(Edge.make_bspline(
                [(0.2167427022, -1.3993629136), (0.7183398628, -1.45660379), (1.2236066033, -1.6030349201), (1.7675934621, -1.7679404269)],
                knots=[0.8574493311, 0.8574493311, 0.8574493311, 0.8574493311, 0.9999725754, 0.9999725754, 0.9999725754, 0.9999725754], degree=3))
            ThreePointArc((1.7675934621, -1.7679404269), (1.7676802097, -1.767853692), (1.767766953, -1.767766953))
        make_face()
        with BuildLine():
            add(Edge.make_bspline(
                [(-1.0533337262, -1.483930502), (-0.6189063746, -1.3659750292), (-0.2023627587, -1.3515357612), (0.2167427022, -1.3993629136)],
                knots=[0.7383651842, 0.7383651842, 0.7383651842, 0.7383651842, 0.8574493311, 0.8574493311, 0.8574493311, 0.8574493311], degree=3))
            add(Edge.make_bspline(
                [(-1.0533337269, -1.4839305003), (-1.0137727139, -1.7486949687), (-0.9849555119, -2.0237222677), (-0.9567085809, -2.3096988313)],
                knots=[0.9279501592, 0.9279501592, 0.9279501592, 0.9279501592, 1, 1, 1, 1], degree=3))
            add(Edge.make_bspline(
                [(-0.9567085809, -2.3096988313), (-0.5926420337, -1.8740199281), (-0.2028489108, -1.59069104), (0.2167427022, -1.3993629136)],
                knots=[0.6747802814, 0.6747802814, 0.6747802814, 0.6747802814, 0.8052069185, 0.8052069185, 0.8052069185, 0.8052069185], degree=3))
        make_face()
        with BuildLine():
            add(Edge.make_bspline(
                [(0.2167427022, -1.3993629136), (0.7183398628, -1.45660379), (1.2236066033, -1.6030349201), (1.7675934621, -1.7679404269)],
                knots=[0.8574493311, 0.8574493311, 0.8574493311, 0.8574493311, 0.9999725754, 0.9999725754, 0.9999725754, 0.9999725754], degree=3))
            add(Edge.make_bspline(
                [(-0.9567085809, -2.3096988313), (-0.5926420337, -1.8740199281), (-0.2028489108, -1.59069104), (0.2167427022, -1.3993629136)],
                knots=[0.6747802814, 0.6747802814, 0.6747802814, 0.6747802814, 0.8052069185, 0.8052069185, 0.8052069185, 0.8052069185], degree=3))
            ThreePointArc((-0.9567085809, -2.3096988313), (0.487605491, -2.4519871299), (1.7675934621, -1.7679404269))
        make_face()
    extrude(amount=F1_DEPTH)


solid = f1.part
